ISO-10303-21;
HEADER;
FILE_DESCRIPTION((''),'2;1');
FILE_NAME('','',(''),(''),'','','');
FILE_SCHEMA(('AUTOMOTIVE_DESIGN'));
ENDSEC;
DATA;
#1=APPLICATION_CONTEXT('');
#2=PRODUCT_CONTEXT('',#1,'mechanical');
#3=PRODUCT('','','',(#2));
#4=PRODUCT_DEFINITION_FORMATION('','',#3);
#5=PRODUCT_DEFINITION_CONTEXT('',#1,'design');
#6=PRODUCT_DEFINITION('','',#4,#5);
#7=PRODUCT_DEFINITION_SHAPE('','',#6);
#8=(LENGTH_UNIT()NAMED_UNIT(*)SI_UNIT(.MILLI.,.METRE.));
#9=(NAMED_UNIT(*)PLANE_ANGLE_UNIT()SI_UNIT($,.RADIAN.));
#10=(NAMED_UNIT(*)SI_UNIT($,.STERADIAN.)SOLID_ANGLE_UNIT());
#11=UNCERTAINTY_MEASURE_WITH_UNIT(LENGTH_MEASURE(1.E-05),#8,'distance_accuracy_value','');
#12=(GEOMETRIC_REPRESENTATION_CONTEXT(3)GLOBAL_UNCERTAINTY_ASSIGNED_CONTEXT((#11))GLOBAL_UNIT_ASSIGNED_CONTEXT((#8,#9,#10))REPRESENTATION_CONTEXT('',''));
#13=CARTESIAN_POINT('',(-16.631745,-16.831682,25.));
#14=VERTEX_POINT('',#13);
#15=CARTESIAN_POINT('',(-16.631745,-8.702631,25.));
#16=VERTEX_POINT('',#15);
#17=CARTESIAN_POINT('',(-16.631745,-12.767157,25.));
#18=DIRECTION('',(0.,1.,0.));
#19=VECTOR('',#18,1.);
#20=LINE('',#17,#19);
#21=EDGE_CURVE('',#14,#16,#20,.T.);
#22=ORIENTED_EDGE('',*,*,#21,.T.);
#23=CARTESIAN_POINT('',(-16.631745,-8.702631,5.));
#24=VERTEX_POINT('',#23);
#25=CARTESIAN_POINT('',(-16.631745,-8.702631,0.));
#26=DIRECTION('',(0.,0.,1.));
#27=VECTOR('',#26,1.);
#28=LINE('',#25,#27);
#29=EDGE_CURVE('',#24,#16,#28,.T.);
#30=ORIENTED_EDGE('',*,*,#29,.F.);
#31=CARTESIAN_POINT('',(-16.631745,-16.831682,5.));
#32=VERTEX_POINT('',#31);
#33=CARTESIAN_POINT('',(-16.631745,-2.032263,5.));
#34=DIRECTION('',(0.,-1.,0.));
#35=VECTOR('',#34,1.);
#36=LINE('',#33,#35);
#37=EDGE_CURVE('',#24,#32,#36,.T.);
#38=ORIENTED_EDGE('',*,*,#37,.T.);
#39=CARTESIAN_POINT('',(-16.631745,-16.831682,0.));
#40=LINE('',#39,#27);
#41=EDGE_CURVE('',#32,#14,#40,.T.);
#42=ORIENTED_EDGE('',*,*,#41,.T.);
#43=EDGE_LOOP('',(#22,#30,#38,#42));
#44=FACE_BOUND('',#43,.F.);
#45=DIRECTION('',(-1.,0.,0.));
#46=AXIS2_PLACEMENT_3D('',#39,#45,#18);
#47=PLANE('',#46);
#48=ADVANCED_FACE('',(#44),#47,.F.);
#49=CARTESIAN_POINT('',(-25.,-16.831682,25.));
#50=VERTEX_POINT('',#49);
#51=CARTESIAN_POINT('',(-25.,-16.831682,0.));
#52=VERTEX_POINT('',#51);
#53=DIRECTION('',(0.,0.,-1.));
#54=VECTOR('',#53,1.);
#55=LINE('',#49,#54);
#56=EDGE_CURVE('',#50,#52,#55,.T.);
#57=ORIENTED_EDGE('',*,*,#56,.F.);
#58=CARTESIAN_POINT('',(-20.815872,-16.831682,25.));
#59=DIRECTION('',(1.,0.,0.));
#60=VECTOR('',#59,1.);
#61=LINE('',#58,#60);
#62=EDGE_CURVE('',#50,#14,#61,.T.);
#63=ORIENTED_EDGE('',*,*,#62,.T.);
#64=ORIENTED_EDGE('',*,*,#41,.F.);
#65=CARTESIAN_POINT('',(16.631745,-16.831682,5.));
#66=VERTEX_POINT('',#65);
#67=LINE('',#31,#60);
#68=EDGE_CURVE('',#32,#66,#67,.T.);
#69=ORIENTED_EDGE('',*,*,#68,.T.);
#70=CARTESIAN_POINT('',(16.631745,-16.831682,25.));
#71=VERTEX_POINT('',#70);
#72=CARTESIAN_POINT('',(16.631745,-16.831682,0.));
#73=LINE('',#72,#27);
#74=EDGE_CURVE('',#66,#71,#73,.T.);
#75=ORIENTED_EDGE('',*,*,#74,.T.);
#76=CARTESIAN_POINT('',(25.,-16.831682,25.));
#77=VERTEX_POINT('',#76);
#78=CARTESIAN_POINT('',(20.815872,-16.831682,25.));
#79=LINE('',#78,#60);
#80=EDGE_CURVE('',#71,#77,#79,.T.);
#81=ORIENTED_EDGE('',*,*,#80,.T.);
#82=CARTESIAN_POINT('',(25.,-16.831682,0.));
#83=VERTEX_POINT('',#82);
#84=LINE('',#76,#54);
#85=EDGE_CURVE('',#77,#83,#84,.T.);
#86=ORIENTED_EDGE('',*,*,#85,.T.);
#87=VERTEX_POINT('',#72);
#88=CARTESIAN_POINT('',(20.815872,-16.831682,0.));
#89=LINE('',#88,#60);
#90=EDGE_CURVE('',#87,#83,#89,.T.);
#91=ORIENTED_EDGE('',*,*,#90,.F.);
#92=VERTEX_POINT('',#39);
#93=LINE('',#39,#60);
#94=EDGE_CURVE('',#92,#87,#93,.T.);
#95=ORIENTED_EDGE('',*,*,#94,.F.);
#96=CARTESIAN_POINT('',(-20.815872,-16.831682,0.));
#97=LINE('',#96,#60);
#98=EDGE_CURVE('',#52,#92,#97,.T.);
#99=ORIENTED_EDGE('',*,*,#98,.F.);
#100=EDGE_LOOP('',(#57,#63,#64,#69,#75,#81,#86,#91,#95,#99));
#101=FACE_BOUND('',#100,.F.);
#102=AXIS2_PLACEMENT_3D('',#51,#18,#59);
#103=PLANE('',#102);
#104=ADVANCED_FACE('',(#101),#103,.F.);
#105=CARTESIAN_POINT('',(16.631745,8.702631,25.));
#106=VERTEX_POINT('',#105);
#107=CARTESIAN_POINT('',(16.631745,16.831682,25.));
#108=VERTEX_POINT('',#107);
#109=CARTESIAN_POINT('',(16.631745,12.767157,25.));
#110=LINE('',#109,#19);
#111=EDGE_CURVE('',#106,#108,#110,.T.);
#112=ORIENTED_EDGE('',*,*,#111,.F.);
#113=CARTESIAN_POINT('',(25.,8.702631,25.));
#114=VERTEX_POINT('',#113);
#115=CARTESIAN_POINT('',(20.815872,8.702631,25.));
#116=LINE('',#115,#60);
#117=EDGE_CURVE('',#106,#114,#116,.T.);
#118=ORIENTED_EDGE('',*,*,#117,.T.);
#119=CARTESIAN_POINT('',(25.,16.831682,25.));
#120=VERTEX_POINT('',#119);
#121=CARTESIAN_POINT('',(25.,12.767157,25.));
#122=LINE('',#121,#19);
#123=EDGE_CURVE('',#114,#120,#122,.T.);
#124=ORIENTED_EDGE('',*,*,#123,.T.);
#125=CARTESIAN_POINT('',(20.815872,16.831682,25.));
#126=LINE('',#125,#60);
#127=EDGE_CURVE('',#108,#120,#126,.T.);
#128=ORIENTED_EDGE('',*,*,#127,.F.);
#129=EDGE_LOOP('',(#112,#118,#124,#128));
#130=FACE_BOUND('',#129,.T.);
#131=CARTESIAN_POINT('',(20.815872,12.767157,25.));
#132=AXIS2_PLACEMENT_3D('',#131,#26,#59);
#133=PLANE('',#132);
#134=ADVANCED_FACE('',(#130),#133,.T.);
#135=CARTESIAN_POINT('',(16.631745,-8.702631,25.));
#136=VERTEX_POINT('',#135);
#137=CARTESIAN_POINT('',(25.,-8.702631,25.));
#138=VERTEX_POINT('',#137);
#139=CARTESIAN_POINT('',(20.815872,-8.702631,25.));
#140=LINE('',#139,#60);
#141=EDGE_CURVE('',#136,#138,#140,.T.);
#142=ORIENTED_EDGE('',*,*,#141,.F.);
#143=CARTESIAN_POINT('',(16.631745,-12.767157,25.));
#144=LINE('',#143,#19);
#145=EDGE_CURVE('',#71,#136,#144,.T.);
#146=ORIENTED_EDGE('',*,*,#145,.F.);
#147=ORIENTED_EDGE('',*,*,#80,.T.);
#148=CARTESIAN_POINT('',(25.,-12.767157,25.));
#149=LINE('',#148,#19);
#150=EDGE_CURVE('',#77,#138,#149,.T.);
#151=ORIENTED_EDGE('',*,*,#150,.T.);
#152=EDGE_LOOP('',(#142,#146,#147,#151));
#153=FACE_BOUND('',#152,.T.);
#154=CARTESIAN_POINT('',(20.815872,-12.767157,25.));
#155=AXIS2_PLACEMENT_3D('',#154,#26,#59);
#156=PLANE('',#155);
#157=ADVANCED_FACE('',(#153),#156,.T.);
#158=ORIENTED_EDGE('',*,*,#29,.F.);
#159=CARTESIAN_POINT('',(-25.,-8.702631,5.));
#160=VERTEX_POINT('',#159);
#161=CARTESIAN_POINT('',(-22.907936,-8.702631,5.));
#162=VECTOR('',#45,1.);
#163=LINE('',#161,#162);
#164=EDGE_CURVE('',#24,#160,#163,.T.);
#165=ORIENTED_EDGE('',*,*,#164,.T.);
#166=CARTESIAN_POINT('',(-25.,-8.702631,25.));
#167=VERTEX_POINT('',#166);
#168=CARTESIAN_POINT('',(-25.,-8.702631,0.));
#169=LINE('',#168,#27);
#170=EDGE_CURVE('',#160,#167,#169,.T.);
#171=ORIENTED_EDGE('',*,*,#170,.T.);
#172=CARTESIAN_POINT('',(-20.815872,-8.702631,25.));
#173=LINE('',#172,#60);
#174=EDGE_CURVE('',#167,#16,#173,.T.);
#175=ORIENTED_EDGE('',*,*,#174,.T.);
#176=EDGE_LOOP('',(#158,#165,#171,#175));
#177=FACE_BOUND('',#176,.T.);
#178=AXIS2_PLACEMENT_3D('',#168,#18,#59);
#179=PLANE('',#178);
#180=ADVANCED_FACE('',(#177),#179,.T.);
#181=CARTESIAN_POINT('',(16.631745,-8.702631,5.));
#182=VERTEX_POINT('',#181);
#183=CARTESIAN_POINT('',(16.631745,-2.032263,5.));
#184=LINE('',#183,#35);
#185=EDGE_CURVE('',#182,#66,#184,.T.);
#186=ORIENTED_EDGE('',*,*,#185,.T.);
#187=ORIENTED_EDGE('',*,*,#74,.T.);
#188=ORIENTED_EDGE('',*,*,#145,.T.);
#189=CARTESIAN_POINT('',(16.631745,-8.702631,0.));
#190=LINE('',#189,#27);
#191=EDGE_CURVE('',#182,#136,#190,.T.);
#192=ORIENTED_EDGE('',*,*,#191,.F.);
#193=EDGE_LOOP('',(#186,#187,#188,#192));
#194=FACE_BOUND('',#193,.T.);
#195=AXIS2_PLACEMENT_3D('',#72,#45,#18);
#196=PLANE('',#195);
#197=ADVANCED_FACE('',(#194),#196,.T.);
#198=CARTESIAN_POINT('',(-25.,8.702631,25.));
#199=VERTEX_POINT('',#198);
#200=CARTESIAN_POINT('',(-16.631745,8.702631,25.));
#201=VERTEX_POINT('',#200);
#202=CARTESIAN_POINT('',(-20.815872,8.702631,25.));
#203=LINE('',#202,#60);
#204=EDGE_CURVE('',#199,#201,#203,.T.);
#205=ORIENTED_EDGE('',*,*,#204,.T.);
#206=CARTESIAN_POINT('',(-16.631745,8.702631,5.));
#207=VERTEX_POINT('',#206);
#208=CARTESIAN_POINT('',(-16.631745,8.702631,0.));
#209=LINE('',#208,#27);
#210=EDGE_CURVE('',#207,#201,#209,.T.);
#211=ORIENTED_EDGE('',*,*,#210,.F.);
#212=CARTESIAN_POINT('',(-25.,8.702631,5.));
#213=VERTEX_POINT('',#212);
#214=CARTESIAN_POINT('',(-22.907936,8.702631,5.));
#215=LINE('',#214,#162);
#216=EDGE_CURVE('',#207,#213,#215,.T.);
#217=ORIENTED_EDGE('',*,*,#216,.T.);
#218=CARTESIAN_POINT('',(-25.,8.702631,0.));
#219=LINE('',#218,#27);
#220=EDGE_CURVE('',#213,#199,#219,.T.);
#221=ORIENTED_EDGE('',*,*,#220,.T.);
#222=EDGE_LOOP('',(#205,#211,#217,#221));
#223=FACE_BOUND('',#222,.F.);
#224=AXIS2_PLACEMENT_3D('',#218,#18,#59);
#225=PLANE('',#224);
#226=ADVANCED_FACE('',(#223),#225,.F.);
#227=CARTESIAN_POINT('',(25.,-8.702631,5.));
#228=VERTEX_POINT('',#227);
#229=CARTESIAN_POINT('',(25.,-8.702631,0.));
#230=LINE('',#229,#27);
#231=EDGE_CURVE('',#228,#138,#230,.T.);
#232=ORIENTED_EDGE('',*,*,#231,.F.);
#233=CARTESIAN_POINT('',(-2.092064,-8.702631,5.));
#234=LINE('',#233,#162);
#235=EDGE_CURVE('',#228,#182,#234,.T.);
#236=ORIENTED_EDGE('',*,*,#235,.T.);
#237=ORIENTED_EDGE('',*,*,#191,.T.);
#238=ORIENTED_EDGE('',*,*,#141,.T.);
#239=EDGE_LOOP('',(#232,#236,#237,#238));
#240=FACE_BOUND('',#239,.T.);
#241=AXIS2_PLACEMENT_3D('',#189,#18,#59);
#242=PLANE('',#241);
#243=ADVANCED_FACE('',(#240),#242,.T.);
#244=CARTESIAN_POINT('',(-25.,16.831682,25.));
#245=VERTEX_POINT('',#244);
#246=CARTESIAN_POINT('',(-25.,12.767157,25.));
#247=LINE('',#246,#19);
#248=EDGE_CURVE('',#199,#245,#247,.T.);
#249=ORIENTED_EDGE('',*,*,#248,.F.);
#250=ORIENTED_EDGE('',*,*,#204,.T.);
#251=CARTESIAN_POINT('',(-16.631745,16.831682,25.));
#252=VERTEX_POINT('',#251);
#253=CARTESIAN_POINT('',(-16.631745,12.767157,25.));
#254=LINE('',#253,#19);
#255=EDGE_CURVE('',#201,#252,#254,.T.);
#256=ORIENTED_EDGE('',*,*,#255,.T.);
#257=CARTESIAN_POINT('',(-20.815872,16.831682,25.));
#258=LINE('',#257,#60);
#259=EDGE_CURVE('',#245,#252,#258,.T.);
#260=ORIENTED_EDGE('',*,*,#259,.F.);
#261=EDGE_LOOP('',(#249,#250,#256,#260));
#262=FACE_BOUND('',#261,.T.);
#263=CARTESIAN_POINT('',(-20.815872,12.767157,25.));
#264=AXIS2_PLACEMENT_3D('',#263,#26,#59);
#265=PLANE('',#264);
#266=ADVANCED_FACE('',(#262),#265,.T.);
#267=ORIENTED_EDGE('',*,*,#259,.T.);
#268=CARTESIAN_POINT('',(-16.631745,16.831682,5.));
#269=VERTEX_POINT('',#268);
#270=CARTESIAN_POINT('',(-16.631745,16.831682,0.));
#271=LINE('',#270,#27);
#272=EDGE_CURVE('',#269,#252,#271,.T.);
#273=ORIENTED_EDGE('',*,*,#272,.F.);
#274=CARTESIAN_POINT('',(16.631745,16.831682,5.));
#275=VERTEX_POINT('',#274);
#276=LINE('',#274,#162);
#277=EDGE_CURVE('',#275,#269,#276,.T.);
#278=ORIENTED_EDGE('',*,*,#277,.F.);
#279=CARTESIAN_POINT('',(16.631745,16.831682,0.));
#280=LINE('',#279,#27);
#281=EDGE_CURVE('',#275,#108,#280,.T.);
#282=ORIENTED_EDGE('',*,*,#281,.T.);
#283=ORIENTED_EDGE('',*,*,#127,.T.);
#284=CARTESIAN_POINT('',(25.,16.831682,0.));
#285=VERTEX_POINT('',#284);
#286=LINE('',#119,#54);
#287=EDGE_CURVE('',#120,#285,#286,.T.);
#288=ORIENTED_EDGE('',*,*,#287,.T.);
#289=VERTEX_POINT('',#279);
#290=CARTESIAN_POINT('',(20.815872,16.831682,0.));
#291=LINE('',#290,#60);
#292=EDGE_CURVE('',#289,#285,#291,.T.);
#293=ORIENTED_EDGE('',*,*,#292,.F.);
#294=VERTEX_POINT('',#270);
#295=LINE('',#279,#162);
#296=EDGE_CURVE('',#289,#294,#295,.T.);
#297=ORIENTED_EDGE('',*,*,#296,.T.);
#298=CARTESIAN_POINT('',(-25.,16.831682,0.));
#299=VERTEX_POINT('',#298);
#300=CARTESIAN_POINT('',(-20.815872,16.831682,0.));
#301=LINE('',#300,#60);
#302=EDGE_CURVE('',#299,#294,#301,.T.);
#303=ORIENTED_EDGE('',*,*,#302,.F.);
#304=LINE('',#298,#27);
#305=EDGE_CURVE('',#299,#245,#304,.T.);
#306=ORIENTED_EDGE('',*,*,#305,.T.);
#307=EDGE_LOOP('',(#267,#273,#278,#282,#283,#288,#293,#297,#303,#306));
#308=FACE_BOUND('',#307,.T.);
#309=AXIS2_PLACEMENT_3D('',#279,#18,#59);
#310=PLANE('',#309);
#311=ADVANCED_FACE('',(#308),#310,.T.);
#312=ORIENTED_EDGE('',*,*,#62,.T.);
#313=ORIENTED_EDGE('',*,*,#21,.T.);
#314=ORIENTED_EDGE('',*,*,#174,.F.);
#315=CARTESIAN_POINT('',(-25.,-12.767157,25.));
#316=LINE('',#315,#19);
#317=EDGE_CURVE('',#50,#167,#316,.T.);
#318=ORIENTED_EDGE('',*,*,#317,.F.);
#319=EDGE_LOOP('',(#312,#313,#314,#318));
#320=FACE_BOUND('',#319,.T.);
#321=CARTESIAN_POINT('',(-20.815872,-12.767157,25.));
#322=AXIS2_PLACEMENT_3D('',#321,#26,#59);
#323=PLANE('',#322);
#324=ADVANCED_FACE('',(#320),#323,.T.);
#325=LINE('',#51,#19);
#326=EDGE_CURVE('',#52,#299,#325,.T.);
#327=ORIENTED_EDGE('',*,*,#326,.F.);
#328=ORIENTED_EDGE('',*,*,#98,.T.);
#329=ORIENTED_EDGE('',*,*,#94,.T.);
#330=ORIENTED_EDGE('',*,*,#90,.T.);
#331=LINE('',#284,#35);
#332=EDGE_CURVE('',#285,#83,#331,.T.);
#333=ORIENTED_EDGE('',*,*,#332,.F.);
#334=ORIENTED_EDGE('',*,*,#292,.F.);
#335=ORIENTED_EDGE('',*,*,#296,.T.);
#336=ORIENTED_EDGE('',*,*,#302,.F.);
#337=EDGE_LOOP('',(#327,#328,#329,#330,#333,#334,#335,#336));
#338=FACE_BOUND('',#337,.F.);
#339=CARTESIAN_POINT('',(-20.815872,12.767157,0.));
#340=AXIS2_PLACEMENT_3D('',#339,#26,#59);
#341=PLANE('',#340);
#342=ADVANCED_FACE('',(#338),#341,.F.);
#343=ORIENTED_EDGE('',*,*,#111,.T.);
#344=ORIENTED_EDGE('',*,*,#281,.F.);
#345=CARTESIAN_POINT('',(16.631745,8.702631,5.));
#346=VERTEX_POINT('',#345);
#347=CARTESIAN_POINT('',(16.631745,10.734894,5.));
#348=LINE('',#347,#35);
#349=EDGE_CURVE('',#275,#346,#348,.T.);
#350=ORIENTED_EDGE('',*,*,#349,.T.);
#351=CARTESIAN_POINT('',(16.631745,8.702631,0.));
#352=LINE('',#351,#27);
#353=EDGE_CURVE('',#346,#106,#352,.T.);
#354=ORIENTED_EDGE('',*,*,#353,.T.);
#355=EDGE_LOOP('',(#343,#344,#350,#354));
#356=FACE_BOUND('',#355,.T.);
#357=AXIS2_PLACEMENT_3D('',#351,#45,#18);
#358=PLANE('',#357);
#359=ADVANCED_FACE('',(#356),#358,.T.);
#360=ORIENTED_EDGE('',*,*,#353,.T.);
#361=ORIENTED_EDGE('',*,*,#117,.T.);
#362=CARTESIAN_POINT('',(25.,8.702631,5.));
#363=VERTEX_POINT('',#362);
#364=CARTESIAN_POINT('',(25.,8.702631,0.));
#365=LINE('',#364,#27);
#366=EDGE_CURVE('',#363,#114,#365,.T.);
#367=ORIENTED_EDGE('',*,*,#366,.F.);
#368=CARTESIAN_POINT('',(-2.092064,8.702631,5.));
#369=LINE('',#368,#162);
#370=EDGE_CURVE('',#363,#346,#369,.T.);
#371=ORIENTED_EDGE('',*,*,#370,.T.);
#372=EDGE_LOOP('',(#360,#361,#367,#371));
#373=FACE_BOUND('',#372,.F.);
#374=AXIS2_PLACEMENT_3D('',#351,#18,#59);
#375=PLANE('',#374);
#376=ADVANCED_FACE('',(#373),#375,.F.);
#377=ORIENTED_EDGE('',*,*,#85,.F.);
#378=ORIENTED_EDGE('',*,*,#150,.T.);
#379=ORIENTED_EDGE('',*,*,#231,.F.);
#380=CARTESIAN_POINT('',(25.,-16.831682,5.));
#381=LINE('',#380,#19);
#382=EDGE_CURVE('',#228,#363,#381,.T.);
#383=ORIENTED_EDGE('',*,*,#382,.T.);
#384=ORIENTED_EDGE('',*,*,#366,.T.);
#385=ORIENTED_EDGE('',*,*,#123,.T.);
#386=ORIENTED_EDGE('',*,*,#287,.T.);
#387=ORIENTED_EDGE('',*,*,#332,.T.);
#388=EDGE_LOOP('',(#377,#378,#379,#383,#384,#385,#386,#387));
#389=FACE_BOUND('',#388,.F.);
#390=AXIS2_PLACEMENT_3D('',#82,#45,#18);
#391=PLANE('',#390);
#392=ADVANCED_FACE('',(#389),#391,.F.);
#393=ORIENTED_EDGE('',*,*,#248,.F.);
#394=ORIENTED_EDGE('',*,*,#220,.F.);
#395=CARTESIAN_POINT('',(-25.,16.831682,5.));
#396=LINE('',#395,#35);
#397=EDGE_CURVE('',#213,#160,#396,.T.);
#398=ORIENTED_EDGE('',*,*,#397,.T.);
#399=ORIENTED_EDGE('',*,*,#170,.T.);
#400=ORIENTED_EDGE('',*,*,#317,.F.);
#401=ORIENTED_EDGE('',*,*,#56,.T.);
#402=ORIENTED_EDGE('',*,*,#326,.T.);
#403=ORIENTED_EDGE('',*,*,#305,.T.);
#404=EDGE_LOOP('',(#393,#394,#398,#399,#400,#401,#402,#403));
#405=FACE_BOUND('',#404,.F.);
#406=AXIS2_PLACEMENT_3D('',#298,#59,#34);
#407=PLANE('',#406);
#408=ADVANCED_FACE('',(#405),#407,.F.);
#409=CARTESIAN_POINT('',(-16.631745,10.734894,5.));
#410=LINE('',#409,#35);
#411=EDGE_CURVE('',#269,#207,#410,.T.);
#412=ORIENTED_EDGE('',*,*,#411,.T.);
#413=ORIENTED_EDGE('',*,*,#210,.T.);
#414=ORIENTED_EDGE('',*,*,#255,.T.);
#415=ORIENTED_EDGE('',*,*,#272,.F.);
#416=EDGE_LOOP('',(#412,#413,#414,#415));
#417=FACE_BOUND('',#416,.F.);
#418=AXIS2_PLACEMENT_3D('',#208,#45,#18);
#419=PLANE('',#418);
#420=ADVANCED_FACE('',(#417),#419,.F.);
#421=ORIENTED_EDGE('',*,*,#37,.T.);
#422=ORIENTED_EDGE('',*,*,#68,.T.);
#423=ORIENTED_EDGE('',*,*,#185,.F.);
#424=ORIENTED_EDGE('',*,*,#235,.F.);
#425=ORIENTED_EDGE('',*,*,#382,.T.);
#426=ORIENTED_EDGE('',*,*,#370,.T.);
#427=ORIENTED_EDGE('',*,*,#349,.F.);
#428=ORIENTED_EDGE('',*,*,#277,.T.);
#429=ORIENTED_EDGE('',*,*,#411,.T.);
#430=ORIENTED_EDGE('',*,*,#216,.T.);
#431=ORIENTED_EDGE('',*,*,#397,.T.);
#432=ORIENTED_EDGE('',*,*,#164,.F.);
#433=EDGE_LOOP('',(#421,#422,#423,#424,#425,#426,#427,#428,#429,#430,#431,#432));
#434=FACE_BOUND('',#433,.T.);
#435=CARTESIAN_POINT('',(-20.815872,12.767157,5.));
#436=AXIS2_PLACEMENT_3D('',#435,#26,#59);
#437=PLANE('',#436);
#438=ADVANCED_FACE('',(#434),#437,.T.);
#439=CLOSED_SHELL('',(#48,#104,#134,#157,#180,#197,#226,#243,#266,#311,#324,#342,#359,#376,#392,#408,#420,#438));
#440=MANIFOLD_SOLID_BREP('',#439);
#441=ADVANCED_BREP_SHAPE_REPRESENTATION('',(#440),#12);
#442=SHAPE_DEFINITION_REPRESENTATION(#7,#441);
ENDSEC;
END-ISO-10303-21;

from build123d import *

# Parameters (mm, degrees)
F0_W     = 8.368255198
F0_H     = 8.1290510939
F1_DEPTH = 5
F2_DEPTH = 25


with BuildPart() as f1:
    # F0 (on Top) → F1 (new body)
    with BuildSketch(Plane.XY):
        with Locations((-20.815872401, 12.7671566554)):
            Rectangle(F0_W, F0_H)
        Polygon((16.631744802, 16.8316822024), (-16.631744802, 16.8316822024), (-16.631744802, 8.7026311085), (-25, 8.7026311085), (-25, -8.7026311085), (-16.631744802, -8.7026311085), (-16.631744802, -16.8316822024), (16.631744802, -16.8316822024), (16.631744802, -8.7026311085), (25, -8.7026311085), (25, 8.7026311085), (16.631744802, 8.7026311085), align=None)
        with Locations((20.815872401, 12.7671566554)):
            Rectangle(F0_W, F0_H)
        with Locations((-20.815872401, -12.7671566554)):
            Rectangle(F0_W, F0_H)
        with Locations((20.815872401, -12.7671566554)):
            Rectangle(F0_W, F0_H)
    extrude(amount=F1_DEPTH)

    # F0 (on Top) → F2 (join)
    with BuildSketch(Plane.XY):
        with Locations((20.815872401, 12.7671566554)):
            Rectangle(F0_W, F0_H)
        with Locations((20.815872401, -12.7671566554)):
            Rectangle(F0_W, F0_H)
        with Locations((-20.815872401, -12.7671566554)):
            Rectangle(F0_W, F0_H)
        with Locations((-20.815872401, 12.7671566554)):
            Rectangle(F0_W, F0_H)
    extrude(amount=F2_DEPTH)


solid = f1.part
